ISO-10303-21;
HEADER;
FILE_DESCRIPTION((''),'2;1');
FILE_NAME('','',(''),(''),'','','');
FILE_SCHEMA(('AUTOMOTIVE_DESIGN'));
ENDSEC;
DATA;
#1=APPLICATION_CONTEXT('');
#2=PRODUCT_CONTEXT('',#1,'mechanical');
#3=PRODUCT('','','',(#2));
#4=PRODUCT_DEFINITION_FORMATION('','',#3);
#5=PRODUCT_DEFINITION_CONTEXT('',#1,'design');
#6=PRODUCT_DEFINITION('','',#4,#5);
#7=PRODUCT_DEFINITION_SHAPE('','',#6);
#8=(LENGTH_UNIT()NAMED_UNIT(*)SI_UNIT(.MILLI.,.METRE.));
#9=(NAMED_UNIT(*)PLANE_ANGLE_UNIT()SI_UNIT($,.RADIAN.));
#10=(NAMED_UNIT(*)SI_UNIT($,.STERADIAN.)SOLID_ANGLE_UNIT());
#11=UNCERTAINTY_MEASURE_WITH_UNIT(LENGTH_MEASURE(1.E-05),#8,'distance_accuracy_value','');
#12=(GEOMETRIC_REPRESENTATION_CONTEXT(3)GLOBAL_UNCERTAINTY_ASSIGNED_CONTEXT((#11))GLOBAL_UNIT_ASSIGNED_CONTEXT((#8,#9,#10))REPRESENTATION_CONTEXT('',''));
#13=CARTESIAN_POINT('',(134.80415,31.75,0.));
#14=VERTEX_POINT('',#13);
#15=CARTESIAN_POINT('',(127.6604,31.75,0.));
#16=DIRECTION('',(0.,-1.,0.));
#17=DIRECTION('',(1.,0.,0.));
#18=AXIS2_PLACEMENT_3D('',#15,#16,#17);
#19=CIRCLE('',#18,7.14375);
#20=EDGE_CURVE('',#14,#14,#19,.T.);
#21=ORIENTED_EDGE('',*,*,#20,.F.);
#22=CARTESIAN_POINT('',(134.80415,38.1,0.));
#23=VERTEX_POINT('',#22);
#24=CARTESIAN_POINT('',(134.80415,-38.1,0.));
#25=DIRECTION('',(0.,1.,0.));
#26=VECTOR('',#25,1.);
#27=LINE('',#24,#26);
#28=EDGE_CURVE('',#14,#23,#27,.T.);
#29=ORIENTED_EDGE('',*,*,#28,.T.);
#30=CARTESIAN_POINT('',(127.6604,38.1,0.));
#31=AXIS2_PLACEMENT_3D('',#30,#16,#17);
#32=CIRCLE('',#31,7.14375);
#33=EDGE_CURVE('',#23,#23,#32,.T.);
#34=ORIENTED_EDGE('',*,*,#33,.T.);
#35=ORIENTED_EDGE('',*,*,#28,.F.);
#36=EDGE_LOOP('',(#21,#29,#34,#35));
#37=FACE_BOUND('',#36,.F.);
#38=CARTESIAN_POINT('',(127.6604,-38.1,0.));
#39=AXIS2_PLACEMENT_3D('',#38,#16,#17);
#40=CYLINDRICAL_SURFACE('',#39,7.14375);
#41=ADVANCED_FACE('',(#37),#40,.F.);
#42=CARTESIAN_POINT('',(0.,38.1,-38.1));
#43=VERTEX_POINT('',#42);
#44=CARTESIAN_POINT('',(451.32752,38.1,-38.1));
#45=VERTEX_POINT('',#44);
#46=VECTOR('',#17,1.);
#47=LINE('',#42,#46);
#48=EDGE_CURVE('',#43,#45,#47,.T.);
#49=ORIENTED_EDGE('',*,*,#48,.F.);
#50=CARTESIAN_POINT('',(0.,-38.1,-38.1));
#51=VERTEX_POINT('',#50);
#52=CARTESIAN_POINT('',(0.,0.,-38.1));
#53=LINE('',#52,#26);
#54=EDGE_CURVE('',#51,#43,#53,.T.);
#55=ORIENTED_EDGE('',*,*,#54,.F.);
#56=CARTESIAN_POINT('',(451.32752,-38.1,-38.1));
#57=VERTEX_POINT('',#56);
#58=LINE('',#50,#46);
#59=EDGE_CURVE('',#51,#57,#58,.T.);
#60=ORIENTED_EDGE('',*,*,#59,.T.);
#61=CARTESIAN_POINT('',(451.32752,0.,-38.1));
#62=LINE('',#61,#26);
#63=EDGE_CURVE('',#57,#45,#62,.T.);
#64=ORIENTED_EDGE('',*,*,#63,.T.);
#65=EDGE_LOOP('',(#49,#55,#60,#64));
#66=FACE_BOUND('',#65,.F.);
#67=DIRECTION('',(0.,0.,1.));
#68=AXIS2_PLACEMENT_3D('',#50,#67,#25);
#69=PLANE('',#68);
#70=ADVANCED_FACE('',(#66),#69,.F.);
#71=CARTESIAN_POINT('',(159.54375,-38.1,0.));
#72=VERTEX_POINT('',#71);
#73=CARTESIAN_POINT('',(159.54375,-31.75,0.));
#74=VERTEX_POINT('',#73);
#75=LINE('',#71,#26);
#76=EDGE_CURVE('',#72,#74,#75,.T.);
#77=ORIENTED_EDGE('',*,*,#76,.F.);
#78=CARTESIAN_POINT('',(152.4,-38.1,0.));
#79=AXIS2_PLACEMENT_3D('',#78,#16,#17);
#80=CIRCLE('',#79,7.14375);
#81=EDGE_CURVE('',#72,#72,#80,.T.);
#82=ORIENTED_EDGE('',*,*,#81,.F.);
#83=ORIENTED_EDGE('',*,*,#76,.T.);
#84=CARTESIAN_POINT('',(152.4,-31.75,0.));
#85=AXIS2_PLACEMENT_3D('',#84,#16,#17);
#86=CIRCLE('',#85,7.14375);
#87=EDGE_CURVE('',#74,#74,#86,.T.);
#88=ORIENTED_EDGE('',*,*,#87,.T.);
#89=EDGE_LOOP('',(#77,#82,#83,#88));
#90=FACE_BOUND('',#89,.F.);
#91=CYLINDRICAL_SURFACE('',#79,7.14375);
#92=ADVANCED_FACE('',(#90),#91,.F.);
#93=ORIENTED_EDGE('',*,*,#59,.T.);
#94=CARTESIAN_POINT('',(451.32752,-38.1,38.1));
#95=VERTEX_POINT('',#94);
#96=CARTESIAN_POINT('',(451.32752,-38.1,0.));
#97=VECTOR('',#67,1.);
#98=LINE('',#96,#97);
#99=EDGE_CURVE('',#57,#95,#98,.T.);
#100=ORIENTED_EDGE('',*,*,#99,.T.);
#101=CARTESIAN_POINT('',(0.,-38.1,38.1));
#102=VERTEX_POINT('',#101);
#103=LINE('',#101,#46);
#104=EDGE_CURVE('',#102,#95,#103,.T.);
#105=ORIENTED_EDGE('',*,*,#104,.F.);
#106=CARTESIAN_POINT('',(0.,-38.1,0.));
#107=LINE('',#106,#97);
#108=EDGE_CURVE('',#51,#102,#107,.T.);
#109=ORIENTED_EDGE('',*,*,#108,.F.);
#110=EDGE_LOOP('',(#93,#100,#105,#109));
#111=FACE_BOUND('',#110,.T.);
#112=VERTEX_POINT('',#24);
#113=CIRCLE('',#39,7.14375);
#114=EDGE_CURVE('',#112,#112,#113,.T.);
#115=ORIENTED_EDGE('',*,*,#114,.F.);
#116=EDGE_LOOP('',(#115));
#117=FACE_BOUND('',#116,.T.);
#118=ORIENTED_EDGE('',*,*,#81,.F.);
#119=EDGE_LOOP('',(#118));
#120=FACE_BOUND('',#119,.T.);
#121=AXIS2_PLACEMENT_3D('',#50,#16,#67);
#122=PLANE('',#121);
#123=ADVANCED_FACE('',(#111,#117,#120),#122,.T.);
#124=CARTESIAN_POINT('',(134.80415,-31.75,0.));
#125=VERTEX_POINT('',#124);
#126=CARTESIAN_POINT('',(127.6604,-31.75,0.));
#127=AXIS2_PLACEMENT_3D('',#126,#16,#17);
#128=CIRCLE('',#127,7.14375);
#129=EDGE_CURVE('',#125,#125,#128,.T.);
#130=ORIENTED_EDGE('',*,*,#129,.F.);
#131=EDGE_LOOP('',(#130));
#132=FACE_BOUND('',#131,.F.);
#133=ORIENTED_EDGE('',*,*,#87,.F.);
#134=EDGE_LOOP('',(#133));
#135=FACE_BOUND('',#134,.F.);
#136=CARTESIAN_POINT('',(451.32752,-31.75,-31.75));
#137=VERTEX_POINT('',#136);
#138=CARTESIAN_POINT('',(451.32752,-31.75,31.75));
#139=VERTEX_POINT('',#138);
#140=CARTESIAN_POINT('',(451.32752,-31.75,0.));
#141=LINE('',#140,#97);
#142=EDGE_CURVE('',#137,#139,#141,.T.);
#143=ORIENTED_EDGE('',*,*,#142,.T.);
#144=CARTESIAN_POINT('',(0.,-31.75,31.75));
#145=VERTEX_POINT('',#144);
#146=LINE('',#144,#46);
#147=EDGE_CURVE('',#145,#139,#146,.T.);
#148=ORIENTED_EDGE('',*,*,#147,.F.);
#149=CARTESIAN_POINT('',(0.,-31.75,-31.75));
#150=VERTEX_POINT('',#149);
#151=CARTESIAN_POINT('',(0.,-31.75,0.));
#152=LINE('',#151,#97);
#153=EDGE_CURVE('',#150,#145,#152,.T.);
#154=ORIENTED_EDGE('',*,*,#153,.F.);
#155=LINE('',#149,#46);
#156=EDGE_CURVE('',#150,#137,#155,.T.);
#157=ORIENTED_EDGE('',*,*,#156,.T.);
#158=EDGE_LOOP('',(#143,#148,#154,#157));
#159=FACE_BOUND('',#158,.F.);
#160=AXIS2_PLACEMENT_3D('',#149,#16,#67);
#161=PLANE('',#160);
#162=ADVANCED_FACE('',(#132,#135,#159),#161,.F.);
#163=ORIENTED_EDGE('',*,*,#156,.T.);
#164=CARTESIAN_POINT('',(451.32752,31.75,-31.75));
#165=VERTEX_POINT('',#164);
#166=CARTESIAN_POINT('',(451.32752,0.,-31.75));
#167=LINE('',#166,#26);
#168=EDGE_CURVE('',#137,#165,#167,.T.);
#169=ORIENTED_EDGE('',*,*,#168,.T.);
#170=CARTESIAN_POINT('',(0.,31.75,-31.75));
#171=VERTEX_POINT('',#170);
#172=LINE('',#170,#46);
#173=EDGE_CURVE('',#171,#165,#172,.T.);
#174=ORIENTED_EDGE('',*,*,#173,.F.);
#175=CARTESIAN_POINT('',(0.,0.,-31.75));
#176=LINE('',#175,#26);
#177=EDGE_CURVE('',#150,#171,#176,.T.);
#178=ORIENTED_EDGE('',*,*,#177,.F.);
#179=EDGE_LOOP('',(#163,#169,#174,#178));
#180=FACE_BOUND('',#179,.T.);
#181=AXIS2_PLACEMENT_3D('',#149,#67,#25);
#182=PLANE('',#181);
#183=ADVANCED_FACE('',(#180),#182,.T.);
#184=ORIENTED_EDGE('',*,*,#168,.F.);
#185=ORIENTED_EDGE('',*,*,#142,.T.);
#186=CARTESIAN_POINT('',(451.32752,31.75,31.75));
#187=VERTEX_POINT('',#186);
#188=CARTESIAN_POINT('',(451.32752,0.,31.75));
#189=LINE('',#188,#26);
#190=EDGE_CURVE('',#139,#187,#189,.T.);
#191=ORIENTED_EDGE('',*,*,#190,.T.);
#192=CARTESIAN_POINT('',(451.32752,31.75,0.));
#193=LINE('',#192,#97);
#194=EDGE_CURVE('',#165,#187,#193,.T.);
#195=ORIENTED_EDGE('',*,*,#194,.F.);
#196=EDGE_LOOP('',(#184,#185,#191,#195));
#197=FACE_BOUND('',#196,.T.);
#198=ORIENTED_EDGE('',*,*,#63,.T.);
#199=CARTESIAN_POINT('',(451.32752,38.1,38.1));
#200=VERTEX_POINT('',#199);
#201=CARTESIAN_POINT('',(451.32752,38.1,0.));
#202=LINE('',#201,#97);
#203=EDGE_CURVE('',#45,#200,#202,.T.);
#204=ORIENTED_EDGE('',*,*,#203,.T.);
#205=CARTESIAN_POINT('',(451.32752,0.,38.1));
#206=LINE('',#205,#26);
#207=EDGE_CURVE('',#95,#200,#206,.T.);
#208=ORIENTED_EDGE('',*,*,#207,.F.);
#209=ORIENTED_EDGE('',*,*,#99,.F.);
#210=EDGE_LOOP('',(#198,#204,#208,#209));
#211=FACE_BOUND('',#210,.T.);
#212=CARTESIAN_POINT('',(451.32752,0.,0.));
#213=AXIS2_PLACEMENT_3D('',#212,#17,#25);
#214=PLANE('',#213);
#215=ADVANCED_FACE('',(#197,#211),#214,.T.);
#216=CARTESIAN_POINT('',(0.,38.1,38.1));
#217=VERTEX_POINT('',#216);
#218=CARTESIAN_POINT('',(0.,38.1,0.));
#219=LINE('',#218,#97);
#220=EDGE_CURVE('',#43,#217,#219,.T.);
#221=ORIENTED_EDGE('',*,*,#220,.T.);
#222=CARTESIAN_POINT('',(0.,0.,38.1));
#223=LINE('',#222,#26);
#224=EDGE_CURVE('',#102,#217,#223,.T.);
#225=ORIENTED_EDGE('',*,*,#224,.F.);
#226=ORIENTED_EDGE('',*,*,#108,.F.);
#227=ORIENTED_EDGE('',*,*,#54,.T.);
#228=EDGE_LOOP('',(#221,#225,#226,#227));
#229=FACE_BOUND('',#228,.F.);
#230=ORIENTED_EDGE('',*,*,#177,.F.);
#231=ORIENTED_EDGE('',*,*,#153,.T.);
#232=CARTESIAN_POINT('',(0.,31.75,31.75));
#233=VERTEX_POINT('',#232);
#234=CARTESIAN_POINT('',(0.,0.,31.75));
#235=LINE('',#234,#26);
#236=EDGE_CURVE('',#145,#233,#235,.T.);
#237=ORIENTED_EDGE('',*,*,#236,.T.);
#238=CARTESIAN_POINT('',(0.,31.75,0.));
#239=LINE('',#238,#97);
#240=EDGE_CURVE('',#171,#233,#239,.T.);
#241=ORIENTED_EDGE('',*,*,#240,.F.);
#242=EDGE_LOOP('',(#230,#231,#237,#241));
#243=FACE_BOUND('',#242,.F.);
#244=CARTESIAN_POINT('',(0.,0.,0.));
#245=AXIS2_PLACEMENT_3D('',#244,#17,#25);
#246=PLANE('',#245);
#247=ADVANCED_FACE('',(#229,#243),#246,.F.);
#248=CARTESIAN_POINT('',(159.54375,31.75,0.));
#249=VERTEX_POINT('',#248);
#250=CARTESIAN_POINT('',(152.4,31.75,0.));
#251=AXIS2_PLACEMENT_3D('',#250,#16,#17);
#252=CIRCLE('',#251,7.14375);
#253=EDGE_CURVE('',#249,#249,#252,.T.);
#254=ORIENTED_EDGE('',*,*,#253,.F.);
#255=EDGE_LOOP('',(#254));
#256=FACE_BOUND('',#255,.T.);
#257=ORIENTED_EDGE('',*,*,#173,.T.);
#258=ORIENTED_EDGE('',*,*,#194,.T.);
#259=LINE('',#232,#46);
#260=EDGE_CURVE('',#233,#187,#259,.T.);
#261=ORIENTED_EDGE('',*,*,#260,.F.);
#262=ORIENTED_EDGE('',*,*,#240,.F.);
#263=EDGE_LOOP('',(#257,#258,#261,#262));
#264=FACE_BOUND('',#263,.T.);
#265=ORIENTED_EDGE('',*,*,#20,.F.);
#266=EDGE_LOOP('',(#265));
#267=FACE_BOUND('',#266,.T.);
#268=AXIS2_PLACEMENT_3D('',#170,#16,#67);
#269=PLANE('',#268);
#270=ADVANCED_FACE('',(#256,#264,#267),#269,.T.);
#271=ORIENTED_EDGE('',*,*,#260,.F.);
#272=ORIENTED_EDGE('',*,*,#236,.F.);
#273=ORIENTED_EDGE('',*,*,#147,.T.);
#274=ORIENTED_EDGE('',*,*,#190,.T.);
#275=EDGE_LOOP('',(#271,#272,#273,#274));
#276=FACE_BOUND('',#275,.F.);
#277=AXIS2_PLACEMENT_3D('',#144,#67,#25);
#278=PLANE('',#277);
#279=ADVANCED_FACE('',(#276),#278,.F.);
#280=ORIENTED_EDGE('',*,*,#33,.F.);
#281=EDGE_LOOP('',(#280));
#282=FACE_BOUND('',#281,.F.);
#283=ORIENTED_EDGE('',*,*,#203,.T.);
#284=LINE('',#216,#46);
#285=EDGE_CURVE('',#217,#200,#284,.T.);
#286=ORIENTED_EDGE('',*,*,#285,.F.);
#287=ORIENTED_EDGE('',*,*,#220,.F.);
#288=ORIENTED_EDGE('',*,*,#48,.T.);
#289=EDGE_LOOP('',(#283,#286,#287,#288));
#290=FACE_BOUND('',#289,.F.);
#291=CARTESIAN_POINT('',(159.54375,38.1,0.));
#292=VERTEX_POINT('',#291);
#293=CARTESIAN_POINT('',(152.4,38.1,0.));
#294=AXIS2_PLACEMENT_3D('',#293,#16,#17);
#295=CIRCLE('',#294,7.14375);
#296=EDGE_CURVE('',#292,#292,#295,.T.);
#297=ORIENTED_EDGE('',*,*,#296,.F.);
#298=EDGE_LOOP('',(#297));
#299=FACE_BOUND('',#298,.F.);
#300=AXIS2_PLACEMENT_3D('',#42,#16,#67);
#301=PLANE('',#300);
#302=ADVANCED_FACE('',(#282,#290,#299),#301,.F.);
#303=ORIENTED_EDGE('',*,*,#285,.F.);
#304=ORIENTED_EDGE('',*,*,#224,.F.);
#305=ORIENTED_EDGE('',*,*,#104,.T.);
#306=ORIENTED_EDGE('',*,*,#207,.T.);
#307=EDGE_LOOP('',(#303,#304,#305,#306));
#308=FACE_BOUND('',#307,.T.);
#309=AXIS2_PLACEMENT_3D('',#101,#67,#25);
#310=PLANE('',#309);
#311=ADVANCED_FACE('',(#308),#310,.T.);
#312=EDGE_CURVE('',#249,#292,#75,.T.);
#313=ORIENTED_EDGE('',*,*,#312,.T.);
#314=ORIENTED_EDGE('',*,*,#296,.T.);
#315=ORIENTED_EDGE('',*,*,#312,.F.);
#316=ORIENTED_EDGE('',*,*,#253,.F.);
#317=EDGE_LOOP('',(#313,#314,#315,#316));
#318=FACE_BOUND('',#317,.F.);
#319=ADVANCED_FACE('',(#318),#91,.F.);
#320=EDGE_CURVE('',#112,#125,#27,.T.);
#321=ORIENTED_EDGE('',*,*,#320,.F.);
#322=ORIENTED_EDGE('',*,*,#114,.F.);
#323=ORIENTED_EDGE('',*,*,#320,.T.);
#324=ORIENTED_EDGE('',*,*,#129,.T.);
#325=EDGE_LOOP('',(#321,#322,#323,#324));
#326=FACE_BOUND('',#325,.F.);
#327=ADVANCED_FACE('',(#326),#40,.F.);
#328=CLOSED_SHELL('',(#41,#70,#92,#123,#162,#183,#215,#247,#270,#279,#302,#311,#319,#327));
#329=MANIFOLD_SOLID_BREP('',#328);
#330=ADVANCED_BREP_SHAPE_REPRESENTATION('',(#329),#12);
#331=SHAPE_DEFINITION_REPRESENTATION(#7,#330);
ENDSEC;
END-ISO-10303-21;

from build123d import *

# Parameters (mm, degrees)
F1_W     = 76.2
F1_H     = 76.2
F1_W_2   = 63.5
F1_H_2   = 63.5
F2_DEPTH = 451.32752
F3_R     = 7.14375
F4_DEPTH = 76.201


# Not quite as in the source:
# - a variable given as a bare number and used for a length is read in inches; the dataset says mm whatever the document's units were


with BuildPart() as f2:
    # F1 (on Right) → F2 (new body)
    with BuildSketch(Plane.YZ):
        Rectangle(F1_W, F1_H)
        Rectangle(F1_W_2, F1_H_2, mode=Mode.SUBTRACT)
    extrude(amount=F2_DEPTH)

    # F3 (on face) → F4 (cut, through all)
    with BuildSketch(Plane.XZ.offset(38.1)):
        with Locations((152.4, 0)):
            Circle(F3_R)
        with Locations((127.6604, 0)):
            Circle(F3_R)
    extrude(amount=-F4_DEPTH, mode=Mode.SUBTRACT)


solid = f2.part
